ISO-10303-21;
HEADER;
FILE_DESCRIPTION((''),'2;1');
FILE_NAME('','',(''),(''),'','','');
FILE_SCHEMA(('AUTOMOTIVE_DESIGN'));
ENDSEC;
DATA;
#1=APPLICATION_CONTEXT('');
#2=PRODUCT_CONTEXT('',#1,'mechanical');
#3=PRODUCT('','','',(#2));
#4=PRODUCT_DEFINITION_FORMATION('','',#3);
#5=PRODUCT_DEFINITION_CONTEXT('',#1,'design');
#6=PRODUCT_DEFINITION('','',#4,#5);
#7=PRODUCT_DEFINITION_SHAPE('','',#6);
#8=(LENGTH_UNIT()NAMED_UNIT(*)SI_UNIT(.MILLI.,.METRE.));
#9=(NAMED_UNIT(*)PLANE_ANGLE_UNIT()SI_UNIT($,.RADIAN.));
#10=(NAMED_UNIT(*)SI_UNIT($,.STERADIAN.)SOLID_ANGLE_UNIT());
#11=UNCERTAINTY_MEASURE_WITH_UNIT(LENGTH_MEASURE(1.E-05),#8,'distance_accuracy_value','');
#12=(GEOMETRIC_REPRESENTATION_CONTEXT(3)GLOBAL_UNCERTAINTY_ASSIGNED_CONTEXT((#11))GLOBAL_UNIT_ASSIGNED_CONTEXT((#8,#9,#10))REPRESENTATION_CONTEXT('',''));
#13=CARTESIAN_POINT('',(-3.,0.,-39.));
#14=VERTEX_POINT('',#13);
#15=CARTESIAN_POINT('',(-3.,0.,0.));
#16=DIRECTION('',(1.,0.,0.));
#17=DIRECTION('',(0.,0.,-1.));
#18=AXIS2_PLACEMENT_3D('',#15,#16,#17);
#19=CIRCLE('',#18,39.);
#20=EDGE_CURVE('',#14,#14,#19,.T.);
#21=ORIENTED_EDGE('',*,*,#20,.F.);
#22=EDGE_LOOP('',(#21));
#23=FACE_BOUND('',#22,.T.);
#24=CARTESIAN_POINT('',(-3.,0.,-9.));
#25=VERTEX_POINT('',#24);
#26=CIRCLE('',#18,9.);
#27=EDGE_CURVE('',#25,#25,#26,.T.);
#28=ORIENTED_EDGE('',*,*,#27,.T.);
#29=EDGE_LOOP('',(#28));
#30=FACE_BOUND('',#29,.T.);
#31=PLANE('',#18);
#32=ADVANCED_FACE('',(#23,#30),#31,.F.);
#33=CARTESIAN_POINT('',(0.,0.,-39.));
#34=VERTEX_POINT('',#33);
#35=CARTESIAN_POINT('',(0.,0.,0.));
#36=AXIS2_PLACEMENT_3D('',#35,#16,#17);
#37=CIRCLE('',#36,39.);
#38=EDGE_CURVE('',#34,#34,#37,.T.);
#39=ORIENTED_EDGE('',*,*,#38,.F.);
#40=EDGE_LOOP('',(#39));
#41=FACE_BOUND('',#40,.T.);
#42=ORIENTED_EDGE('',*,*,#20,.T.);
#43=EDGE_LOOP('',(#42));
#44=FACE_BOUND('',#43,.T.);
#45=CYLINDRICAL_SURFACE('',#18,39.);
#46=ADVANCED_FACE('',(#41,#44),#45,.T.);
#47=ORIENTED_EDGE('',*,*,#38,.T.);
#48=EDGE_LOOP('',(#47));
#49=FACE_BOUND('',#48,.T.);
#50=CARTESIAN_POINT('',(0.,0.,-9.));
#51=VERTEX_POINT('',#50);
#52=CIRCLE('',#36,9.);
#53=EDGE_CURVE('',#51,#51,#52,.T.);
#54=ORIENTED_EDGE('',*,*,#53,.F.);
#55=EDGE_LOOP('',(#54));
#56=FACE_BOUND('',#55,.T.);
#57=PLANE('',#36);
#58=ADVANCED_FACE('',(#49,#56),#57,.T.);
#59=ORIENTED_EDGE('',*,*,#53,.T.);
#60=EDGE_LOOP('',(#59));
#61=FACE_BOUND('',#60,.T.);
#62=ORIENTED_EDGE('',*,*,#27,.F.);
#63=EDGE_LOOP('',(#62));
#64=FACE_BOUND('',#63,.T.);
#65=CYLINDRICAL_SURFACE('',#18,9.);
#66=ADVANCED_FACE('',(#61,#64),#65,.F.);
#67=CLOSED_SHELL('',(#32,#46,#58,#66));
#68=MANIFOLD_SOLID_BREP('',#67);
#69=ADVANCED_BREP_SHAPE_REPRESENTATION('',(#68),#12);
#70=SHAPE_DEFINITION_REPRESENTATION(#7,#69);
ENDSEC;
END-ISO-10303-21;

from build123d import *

# Parameters (mm, degrees)
SKETCH_1_R             = 39
SKETCH_1_R_2           = 9
SM_BASE_FLANGE_1_DEPTH = 3


# Sheet-metal steps are written as plain solids
with BuildPart() as part:
    # Sketch 1 → Базовая кромка1 (new body)
    with BuildSketch(Plane(origin=(0, 0, 0), x_dir=(0, 0, -1), z_dir=(1, 0, 0))):
        Circle(SKETCH_1_R)
        Circle(SKETCH_1_R_2, mode=Mode.SUBTRACT)
    extrude(amount=-SM_BASE_FLANGE_1_DEPTH)


solid = part.part
